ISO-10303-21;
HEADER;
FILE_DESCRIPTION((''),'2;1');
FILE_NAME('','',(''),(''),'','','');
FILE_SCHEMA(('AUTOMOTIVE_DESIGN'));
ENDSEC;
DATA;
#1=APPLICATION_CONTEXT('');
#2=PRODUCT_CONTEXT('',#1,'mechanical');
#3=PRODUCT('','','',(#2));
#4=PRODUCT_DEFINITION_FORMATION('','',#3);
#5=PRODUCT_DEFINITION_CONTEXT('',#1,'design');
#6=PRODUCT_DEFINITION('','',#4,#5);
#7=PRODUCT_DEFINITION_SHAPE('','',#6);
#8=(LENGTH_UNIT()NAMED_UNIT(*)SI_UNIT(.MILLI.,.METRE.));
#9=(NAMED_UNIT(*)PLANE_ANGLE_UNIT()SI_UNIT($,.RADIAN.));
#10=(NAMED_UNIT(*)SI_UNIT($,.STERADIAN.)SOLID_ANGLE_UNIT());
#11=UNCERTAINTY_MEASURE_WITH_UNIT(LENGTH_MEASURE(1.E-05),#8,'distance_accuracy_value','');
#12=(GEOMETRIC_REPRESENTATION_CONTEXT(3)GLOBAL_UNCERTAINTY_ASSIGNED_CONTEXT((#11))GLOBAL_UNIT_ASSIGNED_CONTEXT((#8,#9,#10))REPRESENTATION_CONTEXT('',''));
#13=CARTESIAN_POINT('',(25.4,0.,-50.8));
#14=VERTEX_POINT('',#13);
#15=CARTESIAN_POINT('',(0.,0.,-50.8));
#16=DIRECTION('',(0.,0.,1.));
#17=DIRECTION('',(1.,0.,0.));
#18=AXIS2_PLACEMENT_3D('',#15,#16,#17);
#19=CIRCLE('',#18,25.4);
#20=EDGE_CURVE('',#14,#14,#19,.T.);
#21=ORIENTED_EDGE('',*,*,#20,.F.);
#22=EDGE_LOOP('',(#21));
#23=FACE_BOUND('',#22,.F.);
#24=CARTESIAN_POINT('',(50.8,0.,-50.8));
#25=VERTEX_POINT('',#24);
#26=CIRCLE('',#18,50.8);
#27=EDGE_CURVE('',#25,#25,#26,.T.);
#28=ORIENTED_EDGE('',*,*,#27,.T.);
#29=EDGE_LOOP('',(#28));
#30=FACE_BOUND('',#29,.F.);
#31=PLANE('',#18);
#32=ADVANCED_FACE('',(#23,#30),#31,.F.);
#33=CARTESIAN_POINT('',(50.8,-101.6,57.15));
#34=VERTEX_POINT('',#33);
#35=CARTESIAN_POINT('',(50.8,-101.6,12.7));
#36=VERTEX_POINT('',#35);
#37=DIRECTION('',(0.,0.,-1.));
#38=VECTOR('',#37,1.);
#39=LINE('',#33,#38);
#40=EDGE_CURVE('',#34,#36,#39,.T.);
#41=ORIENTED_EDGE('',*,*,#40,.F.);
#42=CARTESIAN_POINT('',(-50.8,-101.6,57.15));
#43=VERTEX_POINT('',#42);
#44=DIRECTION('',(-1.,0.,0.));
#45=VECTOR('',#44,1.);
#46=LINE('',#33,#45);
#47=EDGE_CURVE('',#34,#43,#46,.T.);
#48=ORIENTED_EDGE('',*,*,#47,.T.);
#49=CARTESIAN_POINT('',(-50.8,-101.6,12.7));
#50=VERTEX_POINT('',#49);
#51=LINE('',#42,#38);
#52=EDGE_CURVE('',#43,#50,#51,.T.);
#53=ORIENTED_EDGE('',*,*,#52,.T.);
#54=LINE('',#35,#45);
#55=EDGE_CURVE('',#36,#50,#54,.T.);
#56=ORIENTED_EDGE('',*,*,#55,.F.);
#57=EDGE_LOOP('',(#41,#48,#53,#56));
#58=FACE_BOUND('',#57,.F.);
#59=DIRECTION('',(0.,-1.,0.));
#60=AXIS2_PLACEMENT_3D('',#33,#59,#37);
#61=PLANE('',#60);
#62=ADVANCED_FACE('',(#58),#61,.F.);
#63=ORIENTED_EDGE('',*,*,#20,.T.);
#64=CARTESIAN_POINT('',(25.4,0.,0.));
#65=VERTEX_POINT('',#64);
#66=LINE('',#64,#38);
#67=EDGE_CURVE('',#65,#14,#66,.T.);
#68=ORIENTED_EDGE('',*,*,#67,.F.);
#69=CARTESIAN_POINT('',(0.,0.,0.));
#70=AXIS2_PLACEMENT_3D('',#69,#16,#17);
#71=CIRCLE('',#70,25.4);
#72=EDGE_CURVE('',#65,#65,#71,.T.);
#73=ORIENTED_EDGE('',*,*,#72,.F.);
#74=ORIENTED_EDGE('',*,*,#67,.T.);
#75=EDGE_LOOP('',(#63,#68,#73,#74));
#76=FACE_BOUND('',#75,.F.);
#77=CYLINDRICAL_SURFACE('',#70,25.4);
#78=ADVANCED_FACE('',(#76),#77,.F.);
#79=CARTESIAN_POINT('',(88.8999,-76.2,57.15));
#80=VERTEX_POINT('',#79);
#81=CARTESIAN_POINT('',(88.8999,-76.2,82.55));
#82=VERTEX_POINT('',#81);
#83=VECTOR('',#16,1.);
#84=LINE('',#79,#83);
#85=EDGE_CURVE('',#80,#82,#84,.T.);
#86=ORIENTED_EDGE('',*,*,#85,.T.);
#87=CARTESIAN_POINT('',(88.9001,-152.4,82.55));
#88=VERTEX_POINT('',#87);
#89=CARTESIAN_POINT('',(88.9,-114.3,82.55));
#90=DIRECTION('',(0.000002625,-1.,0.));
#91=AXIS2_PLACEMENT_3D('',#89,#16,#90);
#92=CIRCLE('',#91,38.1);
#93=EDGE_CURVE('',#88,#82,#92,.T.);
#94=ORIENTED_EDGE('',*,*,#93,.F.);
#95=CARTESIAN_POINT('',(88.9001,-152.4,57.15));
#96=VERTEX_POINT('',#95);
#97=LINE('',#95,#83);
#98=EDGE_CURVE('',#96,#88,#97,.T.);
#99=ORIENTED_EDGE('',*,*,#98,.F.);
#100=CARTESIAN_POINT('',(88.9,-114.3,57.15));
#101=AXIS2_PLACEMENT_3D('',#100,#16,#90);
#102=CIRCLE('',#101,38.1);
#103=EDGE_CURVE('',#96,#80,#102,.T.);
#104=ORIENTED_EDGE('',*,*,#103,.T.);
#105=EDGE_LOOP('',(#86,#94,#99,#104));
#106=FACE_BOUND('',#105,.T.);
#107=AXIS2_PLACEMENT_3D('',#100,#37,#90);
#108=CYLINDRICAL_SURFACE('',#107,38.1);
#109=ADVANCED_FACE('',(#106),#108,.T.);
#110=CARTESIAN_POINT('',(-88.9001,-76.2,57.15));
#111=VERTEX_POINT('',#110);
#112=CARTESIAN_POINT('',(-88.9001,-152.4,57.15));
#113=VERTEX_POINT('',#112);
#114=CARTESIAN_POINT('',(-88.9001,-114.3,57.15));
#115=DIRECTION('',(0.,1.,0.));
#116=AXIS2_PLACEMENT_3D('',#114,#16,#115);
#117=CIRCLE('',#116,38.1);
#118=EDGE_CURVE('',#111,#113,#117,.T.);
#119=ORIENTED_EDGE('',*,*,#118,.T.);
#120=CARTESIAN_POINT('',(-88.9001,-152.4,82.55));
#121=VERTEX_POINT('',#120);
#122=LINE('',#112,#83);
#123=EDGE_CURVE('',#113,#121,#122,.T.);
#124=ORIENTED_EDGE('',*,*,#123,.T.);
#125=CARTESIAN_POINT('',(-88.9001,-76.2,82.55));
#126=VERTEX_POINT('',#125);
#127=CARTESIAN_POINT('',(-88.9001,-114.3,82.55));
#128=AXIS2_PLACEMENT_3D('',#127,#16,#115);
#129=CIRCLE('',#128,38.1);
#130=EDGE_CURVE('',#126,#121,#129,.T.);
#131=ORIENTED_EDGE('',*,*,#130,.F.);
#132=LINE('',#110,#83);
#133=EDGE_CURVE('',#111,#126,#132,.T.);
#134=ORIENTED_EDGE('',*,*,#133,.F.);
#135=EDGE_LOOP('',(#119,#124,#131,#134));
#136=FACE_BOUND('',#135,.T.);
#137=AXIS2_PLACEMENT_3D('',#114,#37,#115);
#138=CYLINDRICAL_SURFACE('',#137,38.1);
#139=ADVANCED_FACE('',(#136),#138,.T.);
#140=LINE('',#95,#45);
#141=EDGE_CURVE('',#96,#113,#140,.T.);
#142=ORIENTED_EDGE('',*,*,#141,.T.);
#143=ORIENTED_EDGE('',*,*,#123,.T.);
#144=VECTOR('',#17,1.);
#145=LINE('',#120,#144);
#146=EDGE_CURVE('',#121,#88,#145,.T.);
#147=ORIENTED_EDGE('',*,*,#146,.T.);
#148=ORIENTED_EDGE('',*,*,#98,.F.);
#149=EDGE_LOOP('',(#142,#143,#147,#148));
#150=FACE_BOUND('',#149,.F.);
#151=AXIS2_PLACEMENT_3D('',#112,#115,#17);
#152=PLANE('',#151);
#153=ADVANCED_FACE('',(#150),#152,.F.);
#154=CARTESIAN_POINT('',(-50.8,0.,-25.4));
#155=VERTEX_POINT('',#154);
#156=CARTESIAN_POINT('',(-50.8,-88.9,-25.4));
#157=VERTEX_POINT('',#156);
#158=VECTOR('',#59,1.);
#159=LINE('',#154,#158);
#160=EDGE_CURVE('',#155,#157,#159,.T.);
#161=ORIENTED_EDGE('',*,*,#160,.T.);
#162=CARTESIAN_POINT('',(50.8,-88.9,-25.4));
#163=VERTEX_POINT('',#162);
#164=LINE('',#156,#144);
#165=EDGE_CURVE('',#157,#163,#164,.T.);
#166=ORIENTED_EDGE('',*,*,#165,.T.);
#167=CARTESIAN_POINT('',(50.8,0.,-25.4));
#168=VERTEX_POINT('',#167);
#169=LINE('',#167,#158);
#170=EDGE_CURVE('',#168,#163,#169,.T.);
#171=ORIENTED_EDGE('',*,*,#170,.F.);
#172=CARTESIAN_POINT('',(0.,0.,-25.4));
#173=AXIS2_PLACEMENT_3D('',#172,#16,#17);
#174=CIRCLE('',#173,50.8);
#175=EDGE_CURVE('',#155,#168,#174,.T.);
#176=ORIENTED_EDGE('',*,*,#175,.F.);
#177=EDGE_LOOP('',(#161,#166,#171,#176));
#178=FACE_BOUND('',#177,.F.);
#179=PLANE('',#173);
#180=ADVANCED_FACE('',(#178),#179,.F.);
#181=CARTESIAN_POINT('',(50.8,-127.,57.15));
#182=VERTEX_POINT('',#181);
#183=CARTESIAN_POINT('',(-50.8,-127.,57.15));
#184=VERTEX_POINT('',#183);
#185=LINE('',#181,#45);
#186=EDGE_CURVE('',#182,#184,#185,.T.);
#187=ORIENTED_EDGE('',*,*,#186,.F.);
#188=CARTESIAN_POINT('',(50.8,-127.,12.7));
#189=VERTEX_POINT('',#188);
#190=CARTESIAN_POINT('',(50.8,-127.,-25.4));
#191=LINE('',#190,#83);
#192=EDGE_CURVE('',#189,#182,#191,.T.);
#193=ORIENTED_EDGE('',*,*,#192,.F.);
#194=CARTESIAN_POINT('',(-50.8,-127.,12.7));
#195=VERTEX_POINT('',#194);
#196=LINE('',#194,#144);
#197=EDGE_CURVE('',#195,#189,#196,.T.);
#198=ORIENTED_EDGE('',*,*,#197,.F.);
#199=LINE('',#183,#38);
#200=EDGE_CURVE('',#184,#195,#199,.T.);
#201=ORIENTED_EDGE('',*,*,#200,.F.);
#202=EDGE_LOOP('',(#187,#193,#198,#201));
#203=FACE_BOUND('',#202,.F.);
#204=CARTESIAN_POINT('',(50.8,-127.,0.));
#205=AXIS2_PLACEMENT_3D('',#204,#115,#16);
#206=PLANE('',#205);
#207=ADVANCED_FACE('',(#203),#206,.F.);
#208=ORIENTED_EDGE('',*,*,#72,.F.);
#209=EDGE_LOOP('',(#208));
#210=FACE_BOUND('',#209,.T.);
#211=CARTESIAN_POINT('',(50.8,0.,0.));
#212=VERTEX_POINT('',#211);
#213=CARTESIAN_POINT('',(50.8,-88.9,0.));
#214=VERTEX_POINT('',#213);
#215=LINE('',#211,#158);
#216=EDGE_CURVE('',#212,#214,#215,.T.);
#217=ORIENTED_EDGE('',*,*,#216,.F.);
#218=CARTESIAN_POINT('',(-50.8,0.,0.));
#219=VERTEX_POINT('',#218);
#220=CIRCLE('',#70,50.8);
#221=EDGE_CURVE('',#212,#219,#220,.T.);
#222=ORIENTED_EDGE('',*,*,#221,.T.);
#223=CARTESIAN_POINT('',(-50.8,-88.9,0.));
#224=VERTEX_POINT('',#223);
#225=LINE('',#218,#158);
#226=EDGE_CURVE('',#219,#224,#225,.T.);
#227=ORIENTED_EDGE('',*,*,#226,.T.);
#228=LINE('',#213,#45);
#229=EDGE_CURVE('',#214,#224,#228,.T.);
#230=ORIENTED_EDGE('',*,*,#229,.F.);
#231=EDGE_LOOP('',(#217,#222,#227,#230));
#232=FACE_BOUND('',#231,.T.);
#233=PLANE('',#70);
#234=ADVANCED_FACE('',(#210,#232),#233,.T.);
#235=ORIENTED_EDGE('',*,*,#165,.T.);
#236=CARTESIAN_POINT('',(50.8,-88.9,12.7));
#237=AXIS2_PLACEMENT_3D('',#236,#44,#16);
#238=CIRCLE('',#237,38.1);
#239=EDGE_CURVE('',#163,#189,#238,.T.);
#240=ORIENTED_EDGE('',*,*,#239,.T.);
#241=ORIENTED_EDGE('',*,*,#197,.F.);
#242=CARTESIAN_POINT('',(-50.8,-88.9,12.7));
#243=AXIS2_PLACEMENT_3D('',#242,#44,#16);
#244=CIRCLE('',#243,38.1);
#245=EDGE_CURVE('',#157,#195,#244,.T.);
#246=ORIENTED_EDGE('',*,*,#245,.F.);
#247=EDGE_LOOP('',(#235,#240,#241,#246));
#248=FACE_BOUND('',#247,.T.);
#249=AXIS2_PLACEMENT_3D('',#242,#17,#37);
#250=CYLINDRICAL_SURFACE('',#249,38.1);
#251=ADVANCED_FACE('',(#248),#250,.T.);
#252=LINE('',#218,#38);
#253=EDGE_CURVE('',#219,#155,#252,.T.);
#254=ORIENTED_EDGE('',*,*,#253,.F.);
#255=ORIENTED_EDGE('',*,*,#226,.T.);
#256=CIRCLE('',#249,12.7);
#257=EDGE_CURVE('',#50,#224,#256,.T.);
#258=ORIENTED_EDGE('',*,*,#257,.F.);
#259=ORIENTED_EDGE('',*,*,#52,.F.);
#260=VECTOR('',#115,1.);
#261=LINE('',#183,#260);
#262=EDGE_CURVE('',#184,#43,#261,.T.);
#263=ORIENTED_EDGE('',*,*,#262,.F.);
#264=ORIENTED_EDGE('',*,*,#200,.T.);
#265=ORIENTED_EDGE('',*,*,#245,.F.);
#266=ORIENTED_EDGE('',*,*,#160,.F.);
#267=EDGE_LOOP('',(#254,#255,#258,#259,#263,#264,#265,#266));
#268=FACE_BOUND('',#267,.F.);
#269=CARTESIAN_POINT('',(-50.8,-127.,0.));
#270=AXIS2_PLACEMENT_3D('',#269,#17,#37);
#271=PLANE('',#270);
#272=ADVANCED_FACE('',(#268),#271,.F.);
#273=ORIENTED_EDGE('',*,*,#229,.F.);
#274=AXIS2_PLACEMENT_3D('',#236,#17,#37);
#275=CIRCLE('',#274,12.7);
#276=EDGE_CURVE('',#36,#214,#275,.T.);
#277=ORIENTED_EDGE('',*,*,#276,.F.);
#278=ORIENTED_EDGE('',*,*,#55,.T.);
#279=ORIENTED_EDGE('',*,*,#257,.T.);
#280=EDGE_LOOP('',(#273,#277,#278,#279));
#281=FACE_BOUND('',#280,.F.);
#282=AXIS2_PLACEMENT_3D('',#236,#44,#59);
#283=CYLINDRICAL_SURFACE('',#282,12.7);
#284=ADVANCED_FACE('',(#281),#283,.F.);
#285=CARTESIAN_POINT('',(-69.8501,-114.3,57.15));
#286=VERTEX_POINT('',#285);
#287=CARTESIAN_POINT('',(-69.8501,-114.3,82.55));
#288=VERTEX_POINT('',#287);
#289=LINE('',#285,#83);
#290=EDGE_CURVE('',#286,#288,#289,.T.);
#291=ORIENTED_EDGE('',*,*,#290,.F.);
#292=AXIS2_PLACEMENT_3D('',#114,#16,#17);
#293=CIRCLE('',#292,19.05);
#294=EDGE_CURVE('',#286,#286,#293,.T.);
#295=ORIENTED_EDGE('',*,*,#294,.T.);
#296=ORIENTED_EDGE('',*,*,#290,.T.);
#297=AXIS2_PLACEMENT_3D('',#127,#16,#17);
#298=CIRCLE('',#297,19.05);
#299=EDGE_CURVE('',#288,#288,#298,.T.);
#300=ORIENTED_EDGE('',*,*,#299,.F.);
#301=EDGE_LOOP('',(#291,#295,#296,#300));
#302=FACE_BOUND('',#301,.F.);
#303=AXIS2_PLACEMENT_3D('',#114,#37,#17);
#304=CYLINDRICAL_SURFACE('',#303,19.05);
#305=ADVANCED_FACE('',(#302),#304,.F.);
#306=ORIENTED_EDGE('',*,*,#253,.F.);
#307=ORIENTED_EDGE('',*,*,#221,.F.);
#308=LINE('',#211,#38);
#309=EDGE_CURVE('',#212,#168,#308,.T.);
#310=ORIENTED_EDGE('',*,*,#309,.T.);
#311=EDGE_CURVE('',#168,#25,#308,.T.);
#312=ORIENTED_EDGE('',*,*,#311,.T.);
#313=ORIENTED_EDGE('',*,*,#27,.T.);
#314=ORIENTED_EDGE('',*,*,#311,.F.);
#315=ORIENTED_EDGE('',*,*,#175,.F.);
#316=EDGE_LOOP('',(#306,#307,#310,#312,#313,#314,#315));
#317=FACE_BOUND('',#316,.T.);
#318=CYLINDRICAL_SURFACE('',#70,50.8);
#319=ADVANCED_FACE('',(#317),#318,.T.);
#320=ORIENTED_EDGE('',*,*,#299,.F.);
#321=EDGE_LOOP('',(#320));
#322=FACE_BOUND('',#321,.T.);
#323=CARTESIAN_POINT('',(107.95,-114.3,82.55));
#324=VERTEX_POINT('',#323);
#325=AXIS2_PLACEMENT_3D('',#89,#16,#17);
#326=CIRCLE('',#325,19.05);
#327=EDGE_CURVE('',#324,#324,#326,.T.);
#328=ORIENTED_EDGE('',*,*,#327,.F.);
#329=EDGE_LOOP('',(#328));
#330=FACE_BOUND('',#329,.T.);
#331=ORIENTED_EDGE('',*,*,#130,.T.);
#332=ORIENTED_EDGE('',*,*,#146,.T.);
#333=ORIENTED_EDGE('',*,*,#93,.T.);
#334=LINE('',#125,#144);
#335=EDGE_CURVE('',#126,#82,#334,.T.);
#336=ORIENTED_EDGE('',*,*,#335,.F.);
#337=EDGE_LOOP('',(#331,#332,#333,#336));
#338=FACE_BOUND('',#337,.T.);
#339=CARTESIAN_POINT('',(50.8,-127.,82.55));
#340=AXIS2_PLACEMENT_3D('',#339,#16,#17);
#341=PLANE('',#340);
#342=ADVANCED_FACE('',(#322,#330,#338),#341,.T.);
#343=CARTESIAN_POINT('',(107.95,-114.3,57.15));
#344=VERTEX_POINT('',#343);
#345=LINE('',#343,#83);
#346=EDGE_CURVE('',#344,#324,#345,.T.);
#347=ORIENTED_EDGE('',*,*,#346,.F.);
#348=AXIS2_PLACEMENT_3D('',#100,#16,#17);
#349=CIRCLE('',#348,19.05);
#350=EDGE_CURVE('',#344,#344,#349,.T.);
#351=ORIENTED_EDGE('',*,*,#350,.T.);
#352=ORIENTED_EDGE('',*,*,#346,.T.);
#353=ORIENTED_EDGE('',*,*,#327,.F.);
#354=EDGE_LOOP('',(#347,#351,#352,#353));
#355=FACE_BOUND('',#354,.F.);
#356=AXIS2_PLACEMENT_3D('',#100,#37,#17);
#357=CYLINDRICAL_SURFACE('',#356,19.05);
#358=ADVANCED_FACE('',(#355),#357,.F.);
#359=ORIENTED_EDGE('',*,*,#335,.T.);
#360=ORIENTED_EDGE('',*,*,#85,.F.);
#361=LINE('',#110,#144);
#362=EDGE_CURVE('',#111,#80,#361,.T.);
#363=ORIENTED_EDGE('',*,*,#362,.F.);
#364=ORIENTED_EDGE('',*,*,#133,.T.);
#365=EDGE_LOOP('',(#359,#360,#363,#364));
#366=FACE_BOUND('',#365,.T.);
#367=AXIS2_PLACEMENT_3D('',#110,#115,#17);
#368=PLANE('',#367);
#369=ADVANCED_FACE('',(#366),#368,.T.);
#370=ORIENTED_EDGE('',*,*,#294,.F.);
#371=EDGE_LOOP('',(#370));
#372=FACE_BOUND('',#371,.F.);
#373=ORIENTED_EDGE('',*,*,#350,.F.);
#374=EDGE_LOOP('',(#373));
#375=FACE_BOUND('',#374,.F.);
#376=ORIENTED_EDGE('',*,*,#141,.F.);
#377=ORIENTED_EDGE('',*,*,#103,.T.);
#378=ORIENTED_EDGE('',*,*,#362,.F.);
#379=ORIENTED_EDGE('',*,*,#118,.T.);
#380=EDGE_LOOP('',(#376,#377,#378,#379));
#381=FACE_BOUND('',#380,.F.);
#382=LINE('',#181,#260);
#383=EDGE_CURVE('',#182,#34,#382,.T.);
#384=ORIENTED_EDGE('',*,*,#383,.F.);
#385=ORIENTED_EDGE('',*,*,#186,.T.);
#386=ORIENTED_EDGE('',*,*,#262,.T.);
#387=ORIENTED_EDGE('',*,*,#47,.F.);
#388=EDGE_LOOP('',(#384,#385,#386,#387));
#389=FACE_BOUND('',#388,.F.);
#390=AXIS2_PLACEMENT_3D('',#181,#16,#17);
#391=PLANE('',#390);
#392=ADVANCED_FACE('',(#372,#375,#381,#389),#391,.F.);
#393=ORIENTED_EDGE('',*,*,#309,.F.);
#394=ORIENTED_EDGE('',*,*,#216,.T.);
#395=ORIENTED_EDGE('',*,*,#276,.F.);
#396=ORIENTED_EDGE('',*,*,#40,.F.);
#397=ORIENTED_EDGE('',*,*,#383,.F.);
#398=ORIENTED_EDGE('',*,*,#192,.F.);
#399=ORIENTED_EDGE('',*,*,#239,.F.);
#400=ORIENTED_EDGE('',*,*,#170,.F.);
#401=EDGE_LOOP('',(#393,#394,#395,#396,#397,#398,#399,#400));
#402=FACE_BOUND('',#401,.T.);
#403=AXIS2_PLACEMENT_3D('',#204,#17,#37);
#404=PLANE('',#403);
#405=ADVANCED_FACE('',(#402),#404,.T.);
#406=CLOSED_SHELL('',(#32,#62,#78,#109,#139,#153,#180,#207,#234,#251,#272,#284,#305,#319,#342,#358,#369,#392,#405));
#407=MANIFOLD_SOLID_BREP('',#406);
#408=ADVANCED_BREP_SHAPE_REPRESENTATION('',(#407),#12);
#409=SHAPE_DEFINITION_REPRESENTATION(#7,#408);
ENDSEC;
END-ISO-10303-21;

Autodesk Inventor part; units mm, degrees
ref_plane "YZ Plane" through (0, 0, 0) normal (1, 0, 0) x (0, 1, 0)
ref_plane "XZ Plane" through (0, 0, 0) normal (0, 1, 0) x (-1, 0, 0)
ref_plane "XY Plane" through (0, 0, 0) normal (0, 0, 1) x (1, 0, 0)
sketch "Sketch1" plane through (0, 0, 0) normal (0, 0, 1) x (1, 0, 0)
  circle A0 centre (0, 0) radius 25.4
  circle A1 centre (0, 0) radius 50.8
  dimension "d0" = 50.8
  dimension "d1" = 101.6
extrude "Extrusion1" add sketch "Sketch1" against normal blind 50.8
sketch "Sketch2" plane through (0, 0, 0) normal (0, 0, 1) x (1, 0, 0)
  circle A0 centre (0, 0) radius 50.8 projected
  line L0 (50.8, 0) -> (50.8, -127)
  line L1 (-50.8, 0) -> (-50.8, -127)
  line L2 (-50.8, -127) -> (50.8, -127)
  circle A1 centre (0, 0) radius 50.8
  dimension "d4" = 127
  dimension "d5" = 127
  dimension "d6" = 101.6
extrude "Extrusion2" add sketch "Sketch2" against normal blind 25.4 contours L0 L2 L1 A0
sketch "Sketch3" plane through (50.8, -127, 0) normal (1, 0, 0) x (0, 0, -1)
  line L0 (0, 0) -> (-57.15, 0)
  line L1 (-57.15, 0) -> (-57.15, 25.4)
  line L2 (-57.15, 25.4) -> (0, 25.4)
  line L3 (0, 25.4) -> (0, 0)
  point P0 (0, 127)
  dimension "d9" = 57.15
  dimension "d10" = 25.4
extrude "Extrusion3" add sketch "Sketch3" against normal blind 101.6
fillet "Fillet1" radius 12.7 1 edges at (0, -101.6, 0)
fillet "Fillet2" radius 38.1 1 edges at (0, -127, -25.4)
sketch "Sketch4" plane through (50.8, -127, 57.15) normal (0, 0, 1) x (1, 0, 0)
  line L0 (-139.7001, 50.8) -> (38.0999, 50.8)
  line L1 (-139.7001, -25.4) -> (38.1001, -25.4)
  arc A0 (-139.7001, 50.8) -> (-139.7001, -25.4) centre (-139.7001, 12.7) ccw
  arc A1 (38.1001, -25.4) -> (38.0999, 50.8) centre (38.1, 12.7) ccw
  line L2 (0, 0) -> (-101.6, 0) projected
  line L3 (-50.8, 0) -> (-50.8, -12.1544)
  line L4 (-50.8, -25.4) -> (-50.8, -31.0464)
  circle A2 centre (-139.7001, 12.7) radius 19.05
  circle A3 centre (38.1, 12.7) radius 19.05
  point P0 (-50.8, 127)
  dimension "d15" = 177.8
  dimension "d16" = 76.2
  dimension "d17" = 38.1
  dimension "d18" = 38.1
  dimension "d20" = 25.4
  dimension "d21" = 0
  dimension "d22" = 38.1
  dimension "d23" = 38.1
extrude "Extrusion4" add sketch "Sketch4" along normal blind 25.4
equation "\"d1\" = 2 * d0"
equation "\"d5\" = d4"
equation "\"d17\" = 0.5 * d16"
equation "\"d18\" = d17"
equation "\"d23\" = d22"
properties part number "HW 5 Part 6"
